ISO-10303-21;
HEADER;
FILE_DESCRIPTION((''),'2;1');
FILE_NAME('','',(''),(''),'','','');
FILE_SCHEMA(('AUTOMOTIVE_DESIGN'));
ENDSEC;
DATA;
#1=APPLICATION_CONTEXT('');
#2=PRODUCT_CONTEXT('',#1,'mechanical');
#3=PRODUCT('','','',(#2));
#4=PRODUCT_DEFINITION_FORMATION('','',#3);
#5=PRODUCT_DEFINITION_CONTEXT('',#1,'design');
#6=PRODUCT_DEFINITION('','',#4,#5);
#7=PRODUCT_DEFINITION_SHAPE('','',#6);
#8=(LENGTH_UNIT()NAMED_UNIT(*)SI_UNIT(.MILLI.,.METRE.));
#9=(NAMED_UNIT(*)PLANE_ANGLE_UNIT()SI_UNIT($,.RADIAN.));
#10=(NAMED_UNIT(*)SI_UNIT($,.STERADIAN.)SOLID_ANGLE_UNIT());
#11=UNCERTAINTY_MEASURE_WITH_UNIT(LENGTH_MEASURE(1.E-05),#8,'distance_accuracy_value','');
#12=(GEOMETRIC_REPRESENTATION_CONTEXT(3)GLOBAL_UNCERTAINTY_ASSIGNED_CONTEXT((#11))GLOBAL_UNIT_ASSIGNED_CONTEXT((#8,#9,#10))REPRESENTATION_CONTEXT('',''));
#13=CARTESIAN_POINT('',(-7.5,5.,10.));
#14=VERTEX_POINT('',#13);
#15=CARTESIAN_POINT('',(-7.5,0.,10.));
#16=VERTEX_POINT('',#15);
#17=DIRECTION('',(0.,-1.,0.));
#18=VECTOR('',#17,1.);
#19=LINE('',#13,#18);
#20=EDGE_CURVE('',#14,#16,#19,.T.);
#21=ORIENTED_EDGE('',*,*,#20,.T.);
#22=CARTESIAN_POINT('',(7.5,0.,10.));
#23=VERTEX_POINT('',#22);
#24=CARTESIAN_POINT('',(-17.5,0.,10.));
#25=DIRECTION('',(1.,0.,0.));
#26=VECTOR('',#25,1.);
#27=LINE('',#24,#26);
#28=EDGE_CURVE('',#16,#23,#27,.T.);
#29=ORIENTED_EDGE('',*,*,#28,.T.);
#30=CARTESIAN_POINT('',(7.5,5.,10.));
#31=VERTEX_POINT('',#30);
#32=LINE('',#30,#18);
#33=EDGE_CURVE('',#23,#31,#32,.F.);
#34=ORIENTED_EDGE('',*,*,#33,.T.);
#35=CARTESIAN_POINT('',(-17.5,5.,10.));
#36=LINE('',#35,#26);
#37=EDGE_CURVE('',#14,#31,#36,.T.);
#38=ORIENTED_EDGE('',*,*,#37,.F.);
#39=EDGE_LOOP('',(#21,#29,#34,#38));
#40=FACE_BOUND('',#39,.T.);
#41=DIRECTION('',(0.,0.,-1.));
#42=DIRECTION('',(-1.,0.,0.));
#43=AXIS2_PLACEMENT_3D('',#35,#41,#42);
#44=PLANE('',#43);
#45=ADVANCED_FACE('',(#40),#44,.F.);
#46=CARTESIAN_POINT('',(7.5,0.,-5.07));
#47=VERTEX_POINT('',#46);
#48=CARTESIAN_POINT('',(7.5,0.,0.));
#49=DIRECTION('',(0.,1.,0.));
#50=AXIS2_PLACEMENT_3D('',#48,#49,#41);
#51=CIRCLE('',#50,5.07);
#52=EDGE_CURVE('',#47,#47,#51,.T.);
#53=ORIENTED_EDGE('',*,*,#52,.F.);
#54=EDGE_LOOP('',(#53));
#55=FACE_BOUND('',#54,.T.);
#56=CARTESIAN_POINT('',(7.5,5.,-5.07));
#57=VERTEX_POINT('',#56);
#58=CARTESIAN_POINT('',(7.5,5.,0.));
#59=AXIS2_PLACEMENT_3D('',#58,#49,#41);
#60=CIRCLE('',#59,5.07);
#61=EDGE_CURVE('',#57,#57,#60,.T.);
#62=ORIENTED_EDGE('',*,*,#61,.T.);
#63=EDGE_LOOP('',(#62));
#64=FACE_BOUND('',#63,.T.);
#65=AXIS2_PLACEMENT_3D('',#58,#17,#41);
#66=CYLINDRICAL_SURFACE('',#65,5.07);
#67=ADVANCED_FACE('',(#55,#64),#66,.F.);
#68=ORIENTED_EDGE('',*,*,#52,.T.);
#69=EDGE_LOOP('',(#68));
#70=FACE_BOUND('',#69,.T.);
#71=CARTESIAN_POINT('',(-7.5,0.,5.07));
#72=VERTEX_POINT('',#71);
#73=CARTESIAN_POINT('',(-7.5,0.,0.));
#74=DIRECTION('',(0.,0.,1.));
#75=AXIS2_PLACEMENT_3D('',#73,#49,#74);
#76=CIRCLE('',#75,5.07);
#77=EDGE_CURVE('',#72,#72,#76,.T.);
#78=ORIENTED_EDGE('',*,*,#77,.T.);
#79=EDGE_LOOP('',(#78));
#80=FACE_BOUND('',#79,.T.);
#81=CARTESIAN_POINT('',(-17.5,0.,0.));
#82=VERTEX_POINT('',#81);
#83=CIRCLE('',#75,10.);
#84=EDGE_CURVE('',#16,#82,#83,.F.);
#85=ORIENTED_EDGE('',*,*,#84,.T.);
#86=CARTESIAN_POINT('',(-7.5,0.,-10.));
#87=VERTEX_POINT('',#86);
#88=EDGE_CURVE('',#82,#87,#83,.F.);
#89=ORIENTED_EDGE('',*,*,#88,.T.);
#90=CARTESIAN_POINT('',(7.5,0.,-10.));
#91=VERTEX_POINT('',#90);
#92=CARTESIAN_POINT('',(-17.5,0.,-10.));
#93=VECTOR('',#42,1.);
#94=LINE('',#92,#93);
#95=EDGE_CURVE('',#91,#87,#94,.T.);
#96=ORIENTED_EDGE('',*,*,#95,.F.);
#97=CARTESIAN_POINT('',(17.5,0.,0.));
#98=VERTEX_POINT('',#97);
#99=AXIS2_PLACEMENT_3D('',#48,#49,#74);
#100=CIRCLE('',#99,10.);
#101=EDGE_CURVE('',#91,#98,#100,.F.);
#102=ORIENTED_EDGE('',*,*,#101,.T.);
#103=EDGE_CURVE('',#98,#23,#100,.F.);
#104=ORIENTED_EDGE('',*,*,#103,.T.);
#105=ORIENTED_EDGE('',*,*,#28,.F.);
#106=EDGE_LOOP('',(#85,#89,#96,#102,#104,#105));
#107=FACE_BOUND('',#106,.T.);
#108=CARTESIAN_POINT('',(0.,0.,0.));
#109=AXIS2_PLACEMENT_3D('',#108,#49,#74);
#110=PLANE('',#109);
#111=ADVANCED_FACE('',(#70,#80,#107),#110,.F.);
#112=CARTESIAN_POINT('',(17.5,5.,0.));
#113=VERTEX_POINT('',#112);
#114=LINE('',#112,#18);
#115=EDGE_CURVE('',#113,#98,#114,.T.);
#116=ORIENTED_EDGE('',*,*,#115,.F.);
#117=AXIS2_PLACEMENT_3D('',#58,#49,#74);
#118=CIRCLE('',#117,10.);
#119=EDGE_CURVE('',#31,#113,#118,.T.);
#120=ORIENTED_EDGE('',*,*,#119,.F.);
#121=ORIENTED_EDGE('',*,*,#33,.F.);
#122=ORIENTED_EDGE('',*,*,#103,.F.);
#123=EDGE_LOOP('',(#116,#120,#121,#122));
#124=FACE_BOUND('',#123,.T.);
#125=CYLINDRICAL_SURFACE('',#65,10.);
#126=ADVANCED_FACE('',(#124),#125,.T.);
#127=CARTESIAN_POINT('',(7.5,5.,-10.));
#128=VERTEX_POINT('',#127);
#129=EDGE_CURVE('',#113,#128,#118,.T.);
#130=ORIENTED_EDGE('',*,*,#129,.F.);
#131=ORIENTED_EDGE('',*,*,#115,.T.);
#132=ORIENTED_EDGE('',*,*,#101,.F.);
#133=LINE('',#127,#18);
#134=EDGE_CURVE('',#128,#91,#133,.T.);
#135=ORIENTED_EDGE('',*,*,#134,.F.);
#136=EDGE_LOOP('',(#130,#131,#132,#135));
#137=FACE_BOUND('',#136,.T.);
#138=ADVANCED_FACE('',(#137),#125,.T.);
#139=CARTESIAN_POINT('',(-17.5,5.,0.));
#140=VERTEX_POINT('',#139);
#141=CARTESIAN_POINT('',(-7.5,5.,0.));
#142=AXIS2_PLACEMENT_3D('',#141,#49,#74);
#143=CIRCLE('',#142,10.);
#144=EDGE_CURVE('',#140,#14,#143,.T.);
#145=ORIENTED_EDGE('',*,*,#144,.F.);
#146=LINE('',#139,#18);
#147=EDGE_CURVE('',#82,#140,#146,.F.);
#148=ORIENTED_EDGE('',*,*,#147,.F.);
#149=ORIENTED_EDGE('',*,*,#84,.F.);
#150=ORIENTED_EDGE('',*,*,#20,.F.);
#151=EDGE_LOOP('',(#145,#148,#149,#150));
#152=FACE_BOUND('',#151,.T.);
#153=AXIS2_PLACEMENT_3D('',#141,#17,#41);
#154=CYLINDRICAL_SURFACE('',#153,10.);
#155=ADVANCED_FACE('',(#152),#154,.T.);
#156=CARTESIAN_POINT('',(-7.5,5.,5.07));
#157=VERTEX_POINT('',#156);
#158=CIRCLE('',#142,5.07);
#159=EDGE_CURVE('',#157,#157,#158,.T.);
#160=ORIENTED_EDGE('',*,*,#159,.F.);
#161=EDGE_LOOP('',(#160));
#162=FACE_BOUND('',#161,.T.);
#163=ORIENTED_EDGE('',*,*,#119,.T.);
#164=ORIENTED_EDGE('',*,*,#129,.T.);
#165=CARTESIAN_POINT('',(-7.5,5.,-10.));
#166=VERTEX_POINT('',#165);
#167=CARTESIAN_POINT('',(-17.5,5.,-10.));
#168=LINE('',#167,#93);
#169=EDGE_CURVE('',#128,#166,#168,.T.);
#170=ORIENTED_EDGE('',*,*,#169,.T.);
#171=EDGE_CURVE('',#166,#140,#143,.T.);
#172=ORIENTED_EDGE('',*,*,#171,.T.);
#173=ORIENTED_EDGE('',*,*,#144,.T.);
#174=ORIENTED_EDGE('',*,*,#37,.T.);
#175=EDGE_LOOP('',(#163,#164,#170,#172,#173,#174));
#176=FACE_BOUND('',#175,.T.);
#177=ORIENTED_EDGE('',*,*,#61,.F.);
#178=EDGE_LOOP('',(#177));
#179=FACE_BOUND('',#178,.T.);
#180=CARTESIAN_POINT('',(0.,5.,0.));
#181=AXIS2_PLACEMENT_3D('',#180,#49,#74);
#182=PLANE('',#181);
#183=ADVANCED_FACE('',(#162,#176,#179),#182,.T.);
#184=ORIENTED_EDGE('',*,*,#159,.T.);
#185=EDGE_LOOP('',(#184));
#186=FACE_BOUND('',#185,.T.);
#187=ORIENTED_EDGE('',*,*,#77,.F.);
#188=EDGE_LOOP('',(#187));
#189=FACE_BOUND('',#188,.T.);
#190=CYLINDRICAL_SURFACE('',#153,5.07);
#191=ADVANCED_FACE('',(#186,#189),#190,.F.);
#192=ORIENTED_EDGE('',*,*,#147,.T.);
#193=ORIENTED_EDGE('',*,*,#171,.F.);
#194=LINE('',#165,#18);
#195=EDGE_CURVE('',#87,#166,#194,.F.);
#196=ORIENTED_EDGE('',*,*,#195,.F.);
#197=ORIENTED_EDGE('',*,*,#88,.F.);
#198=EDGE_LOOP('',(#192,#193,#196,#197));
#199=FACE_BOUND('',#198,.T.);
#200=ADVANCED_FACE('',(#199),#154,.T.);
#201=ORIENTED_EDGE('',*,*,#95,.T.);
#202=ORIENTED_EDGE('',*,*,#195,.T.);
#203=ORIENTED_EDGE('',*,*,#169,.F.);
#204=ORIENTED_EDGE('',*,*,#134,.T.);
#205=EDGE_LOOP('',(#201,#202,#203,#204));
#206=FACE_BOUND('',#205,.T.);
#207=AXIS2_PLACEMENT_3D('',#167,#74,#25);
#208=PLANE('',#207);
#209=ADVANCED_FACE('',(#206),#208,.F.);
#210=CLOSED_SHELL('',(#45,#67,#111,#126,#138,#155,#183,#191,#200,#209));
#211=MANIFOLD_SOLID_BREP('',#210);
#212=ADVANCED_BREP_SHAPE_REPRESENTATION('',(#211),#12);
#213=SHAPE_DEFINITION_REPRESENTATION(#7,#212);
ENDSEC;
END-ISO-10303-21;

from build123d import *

# Parameters (mm, degrees)
SKETCH1_W           = 35
SKETCH1_H           = 20
SKETCH1_R           = 5.07
BOSS_EXTRUDE1_DEPTH = 5
FILLET1_R           = 10


with BuildPart() as part:
    # Sketch1 → Boss-Extrude1 (new body)
    with BuildSketch(Plane(origin=(0, 0, 0), x_dir=(1, 0, 0), z_dir=(0, 1, 0))):
        Rectangle(SKETCH1_W, SKETCH1_H)
        with Locations(Location((-7.5, 0, 0), (0, 0, 270))):
            Circle(SKETCH1_R, mode=Mode.SUBTRACT)
        with Locations(Location((7.5, 0, 0), (0, 0, 90))):
            Circle(SKETCH1_R, mode=Mode.SUBTRACT)
    extrude(amount=BOSS_EXTRUDE1_DEPTH)

    # Fillet1
    fillet1_edges = [part.edges().sort_by_distance(p)[0] for p in [
        (-17.5, 2.5, -10),
        (17.5, 2.5, -10),
        (17.5, 2.5, 10),
        (-17.5, 2.5, 10),
    ]]
    fillet(fillet1_edges, radius=FILLET1_R - 0.0001)  # a hair under: the kernel refuses the full size


solid = part.part
